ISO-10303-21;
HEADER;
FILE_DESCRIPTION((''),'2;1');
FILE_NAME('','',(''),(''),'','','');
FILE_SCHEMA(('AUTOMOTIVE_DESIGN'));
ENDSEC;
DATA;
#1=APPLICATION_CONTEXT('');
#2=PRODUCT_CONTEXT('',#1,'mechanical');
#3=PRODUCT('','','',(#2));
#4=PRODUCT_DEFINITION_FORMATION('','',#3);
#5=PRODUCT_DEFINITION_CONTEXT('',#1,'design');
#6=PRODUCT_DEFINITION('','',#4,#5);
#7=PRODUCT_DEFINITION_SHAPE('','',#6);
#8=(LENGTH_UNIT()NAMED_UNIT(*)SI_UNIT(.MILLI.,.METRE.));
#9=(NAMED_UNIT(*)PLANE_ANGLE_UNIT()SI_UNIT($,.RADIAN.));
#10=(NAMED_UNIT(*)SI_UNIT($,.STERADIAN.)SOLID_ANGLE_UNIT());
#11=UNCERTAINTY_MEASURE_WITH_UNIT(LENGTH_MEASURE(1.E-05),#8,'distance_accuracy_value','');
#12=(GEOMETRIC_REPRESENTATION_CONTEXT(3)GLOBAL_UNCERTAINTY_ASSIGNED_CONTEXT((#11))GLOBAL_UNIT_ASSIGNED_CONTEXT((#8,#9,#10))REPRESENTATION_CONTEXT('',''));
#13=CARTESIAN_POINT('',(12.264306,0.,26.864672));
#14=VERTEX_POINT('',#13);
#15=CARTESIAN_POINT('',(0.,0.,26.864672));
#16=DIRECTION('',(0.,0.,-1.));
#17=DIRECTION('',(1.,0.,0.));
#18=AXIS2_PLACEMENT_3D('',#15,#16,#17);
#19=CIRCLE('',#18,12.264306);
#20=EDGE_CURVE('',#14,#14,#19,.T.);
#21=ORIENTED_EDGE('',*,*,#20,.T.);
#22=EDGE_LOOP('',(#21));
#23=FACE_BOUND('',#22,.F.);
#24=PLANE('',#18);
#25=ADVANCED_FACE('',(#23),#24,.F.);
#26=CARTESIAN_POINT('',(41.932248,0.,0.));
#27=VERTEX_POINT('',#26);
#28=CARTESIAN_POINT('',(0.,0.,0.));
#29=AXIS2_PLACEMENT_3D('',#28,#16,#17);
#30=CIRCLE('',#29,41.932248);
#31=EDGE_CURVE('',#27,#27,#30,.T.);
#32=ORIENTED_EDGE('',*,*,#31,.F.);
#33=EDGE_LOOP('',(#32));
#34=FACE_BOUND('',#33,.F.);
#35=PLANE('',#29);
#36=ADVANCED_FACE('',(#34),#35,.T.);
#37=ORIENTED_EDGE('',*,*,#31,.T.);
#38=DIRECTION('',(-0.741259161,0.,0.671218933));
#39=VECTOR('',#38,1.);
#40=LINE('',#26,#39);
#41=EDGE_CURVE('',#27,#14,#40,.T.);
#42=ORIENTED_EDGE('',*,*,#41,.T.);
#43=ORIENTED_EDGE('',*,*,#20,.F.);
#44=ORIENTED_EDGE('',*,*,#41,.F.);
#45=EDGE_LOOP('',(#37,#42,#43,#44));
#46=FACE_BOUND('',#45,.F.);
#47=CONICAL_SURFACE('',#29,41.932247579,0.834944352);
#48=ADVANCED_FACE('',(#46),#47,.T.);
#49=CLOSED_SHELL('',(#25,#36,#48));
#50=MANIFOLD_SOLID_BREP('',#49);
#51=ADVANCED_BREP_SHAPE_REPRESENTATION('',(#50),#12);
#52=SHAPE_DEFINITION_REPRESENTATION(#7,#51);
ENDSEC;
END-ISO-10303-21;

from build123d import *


# Not quite as in the source:
# - the program builds the solid bodies; features that only make, move or delete a surface that nothing else refers to are left out


with BuildPart() as f1:
    # F0 (on Front) → F1 (revolve)
    with BuildSketch(Plane.XZ):
        Polygon((41.9322475791, 0), (12.2643057257, 26.8646720797), (0, 26.8646720797), (0, 0), (12.4979112297, 0), align=None)
    revolve(axis=Axis((0, 0, 13.4323360398), (0, 0, -1)))


solid = f1.part
